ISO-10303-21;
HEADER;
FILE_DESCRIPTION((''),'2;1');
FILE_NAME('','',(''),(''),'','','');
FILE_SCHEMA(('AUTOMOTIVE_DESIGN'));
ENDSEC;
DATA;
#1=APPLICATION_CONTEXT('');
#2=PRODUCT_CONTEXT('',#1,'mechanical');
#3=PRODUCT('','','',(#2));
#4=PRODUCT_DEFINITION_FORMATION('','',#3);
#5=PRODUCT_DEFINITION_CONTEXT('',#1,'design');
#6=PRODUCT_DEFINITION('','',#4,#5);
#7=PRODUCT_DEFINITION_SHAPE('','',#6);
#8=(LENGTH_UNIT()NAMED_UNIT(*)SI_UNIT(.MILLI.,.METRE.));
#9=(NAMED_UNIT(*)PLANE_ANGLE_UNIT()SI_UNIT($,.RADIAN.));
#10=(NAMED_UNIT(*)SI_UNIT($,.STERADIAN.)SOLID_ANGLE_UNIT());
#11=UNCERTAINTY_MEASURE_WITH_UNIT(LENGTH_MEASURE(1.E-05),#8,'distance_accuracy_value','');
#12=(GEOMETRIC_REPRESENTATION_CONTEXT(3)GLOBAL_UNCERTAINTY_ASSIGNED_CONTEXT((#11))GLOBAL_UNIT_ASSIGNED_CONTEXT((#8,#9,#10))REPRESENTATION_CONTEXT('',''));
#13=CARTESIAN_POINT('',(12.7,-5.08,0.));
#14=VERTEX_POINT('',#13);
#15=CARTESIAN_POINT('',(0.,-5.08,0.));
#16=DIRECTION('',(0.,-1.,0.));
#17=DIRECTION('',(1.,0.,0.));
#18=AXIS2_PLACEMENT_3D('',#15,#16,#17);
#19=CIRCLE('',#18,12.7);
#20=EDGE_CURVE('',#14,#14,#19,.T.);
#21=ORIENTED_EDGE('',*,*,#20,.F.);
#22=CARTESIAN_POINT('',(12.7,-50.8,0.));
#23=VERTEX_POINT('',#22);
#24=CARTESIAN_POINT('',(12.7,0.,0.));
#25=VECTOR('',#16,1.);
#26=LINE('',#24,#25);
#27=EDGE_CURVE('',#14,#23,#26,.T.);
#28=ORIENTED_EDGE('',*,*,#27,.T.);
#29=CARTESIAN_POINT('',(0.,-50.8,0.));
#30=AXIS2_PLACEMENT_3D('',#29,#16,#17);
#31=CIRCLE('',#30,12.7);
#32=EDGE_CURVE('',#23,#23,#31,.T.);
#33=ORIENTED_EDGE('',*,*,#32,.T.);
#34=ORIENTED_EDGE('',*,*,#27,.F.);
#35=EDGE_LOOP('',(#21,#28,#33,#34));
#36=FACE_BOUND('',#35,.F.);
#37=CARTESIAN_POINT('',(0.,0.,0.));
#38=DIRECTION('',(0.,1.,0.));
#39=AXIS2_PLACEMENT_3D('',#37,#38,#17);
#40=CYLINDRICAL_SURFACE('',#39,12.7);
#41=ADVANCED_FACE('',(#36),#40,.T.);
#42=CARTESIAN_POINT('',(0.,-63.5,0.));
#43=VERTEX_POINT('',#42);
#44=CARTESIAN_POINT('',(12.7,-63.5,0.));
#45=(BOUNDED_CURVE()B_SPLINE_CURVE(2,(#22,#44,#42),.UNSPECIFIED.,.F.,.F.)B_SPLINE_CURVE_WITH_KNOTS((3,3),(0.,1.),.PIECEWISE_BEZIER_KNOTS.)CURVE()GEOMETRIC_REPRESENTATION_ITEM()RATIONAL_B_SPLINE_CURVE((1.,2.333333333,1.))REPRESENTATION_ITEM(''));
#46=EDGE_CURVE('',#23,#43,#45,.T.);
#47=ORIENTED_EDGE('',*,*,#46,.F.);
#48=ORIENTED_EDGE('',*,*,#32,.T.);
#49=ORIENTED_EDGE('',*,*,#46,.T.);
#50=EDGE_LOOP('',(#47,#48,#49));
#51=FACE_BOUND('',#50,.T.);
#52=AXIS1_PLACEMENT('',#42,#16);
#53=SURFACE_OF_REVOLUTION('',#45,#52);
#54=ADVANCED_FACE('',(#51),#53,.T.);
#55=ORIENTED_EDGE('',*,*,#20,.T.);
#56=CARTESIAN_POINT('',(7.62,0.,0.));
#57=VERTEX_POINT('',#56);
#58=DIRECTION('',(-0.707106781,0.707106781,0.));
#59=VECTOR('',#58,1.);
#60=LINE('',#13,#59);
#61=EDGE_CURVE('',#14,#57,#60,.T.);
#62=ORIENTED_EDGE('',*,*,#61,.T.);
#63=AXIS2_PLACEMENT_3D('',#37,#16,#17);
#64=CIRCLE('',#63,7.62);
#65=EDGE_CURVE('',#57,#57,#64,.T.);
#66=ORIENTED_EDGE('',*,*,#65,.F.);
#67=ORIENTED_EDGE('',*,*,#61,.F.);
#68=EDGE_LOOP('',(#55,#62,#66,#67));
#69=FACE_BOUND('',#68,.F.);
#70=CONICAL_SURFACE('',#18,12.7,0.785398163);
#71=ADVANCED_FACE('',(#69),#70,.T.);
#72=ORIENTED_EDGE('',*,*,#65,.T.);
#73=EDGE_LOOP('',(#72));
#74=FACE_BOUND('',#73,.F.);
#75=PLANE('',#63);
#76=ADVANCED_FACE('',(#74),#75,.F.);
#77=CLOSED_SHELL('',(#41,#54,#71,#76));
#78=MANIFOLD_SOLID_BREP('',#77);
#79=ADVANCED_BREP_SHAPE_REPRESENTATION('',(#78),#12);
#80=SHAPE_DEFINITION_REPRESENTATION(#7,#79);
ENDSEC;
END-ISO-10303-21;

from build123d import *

# Parameters (mm, degrees)
F0_R     = 12.7
F1_DEPTH = 63.5
F2_SIZE  = 5.08


# Not quite as in the source:
# - a fillet or chamfer that OpenCascade refuses, or shapes differently, is made with other operations: its cross-section is extruded or revolved along the edge and cut away or added


with BuildPart() as f1:
    # F0 (on Front) → F1 (new body)
    with BuildSketch(Plane.XZ):
        Circle(F0_R)
    extrude(amount=F1_DEPTH)

    # F2
    f2_edges = [f1.edges().sort_by_distance(p)[0] for p in [
        (-12.7, 0, 0),
    ]]
    chamfer(f2_edges, length=F2_SIZE)

    # F3: fillet of radius 12.7 on 1 edges, made by hand

    # F3_s1 → F3_t2 (revolve, cut)
    with BuildSketch(Plane.XY):
        with BuildLine():
            add(Edge.make_bspline(
                [(12.7, -50.8), (12.7, -63.5), (0, -63.5)],
                knots=[0, 0, 0, 1, 1, 1], degree=2, weights=[1, 2.3333333333, 1]))
            Line((0, -63.5), (12.7, -63.5))
            Line((12.7, -63.5), (12.7, -50.8))
        make_face()
    revolve(axis=Axis((0, -63.5, 0), (0, -1, 0)), mode=Mode.SUBTRACT)


solid = f1.part
